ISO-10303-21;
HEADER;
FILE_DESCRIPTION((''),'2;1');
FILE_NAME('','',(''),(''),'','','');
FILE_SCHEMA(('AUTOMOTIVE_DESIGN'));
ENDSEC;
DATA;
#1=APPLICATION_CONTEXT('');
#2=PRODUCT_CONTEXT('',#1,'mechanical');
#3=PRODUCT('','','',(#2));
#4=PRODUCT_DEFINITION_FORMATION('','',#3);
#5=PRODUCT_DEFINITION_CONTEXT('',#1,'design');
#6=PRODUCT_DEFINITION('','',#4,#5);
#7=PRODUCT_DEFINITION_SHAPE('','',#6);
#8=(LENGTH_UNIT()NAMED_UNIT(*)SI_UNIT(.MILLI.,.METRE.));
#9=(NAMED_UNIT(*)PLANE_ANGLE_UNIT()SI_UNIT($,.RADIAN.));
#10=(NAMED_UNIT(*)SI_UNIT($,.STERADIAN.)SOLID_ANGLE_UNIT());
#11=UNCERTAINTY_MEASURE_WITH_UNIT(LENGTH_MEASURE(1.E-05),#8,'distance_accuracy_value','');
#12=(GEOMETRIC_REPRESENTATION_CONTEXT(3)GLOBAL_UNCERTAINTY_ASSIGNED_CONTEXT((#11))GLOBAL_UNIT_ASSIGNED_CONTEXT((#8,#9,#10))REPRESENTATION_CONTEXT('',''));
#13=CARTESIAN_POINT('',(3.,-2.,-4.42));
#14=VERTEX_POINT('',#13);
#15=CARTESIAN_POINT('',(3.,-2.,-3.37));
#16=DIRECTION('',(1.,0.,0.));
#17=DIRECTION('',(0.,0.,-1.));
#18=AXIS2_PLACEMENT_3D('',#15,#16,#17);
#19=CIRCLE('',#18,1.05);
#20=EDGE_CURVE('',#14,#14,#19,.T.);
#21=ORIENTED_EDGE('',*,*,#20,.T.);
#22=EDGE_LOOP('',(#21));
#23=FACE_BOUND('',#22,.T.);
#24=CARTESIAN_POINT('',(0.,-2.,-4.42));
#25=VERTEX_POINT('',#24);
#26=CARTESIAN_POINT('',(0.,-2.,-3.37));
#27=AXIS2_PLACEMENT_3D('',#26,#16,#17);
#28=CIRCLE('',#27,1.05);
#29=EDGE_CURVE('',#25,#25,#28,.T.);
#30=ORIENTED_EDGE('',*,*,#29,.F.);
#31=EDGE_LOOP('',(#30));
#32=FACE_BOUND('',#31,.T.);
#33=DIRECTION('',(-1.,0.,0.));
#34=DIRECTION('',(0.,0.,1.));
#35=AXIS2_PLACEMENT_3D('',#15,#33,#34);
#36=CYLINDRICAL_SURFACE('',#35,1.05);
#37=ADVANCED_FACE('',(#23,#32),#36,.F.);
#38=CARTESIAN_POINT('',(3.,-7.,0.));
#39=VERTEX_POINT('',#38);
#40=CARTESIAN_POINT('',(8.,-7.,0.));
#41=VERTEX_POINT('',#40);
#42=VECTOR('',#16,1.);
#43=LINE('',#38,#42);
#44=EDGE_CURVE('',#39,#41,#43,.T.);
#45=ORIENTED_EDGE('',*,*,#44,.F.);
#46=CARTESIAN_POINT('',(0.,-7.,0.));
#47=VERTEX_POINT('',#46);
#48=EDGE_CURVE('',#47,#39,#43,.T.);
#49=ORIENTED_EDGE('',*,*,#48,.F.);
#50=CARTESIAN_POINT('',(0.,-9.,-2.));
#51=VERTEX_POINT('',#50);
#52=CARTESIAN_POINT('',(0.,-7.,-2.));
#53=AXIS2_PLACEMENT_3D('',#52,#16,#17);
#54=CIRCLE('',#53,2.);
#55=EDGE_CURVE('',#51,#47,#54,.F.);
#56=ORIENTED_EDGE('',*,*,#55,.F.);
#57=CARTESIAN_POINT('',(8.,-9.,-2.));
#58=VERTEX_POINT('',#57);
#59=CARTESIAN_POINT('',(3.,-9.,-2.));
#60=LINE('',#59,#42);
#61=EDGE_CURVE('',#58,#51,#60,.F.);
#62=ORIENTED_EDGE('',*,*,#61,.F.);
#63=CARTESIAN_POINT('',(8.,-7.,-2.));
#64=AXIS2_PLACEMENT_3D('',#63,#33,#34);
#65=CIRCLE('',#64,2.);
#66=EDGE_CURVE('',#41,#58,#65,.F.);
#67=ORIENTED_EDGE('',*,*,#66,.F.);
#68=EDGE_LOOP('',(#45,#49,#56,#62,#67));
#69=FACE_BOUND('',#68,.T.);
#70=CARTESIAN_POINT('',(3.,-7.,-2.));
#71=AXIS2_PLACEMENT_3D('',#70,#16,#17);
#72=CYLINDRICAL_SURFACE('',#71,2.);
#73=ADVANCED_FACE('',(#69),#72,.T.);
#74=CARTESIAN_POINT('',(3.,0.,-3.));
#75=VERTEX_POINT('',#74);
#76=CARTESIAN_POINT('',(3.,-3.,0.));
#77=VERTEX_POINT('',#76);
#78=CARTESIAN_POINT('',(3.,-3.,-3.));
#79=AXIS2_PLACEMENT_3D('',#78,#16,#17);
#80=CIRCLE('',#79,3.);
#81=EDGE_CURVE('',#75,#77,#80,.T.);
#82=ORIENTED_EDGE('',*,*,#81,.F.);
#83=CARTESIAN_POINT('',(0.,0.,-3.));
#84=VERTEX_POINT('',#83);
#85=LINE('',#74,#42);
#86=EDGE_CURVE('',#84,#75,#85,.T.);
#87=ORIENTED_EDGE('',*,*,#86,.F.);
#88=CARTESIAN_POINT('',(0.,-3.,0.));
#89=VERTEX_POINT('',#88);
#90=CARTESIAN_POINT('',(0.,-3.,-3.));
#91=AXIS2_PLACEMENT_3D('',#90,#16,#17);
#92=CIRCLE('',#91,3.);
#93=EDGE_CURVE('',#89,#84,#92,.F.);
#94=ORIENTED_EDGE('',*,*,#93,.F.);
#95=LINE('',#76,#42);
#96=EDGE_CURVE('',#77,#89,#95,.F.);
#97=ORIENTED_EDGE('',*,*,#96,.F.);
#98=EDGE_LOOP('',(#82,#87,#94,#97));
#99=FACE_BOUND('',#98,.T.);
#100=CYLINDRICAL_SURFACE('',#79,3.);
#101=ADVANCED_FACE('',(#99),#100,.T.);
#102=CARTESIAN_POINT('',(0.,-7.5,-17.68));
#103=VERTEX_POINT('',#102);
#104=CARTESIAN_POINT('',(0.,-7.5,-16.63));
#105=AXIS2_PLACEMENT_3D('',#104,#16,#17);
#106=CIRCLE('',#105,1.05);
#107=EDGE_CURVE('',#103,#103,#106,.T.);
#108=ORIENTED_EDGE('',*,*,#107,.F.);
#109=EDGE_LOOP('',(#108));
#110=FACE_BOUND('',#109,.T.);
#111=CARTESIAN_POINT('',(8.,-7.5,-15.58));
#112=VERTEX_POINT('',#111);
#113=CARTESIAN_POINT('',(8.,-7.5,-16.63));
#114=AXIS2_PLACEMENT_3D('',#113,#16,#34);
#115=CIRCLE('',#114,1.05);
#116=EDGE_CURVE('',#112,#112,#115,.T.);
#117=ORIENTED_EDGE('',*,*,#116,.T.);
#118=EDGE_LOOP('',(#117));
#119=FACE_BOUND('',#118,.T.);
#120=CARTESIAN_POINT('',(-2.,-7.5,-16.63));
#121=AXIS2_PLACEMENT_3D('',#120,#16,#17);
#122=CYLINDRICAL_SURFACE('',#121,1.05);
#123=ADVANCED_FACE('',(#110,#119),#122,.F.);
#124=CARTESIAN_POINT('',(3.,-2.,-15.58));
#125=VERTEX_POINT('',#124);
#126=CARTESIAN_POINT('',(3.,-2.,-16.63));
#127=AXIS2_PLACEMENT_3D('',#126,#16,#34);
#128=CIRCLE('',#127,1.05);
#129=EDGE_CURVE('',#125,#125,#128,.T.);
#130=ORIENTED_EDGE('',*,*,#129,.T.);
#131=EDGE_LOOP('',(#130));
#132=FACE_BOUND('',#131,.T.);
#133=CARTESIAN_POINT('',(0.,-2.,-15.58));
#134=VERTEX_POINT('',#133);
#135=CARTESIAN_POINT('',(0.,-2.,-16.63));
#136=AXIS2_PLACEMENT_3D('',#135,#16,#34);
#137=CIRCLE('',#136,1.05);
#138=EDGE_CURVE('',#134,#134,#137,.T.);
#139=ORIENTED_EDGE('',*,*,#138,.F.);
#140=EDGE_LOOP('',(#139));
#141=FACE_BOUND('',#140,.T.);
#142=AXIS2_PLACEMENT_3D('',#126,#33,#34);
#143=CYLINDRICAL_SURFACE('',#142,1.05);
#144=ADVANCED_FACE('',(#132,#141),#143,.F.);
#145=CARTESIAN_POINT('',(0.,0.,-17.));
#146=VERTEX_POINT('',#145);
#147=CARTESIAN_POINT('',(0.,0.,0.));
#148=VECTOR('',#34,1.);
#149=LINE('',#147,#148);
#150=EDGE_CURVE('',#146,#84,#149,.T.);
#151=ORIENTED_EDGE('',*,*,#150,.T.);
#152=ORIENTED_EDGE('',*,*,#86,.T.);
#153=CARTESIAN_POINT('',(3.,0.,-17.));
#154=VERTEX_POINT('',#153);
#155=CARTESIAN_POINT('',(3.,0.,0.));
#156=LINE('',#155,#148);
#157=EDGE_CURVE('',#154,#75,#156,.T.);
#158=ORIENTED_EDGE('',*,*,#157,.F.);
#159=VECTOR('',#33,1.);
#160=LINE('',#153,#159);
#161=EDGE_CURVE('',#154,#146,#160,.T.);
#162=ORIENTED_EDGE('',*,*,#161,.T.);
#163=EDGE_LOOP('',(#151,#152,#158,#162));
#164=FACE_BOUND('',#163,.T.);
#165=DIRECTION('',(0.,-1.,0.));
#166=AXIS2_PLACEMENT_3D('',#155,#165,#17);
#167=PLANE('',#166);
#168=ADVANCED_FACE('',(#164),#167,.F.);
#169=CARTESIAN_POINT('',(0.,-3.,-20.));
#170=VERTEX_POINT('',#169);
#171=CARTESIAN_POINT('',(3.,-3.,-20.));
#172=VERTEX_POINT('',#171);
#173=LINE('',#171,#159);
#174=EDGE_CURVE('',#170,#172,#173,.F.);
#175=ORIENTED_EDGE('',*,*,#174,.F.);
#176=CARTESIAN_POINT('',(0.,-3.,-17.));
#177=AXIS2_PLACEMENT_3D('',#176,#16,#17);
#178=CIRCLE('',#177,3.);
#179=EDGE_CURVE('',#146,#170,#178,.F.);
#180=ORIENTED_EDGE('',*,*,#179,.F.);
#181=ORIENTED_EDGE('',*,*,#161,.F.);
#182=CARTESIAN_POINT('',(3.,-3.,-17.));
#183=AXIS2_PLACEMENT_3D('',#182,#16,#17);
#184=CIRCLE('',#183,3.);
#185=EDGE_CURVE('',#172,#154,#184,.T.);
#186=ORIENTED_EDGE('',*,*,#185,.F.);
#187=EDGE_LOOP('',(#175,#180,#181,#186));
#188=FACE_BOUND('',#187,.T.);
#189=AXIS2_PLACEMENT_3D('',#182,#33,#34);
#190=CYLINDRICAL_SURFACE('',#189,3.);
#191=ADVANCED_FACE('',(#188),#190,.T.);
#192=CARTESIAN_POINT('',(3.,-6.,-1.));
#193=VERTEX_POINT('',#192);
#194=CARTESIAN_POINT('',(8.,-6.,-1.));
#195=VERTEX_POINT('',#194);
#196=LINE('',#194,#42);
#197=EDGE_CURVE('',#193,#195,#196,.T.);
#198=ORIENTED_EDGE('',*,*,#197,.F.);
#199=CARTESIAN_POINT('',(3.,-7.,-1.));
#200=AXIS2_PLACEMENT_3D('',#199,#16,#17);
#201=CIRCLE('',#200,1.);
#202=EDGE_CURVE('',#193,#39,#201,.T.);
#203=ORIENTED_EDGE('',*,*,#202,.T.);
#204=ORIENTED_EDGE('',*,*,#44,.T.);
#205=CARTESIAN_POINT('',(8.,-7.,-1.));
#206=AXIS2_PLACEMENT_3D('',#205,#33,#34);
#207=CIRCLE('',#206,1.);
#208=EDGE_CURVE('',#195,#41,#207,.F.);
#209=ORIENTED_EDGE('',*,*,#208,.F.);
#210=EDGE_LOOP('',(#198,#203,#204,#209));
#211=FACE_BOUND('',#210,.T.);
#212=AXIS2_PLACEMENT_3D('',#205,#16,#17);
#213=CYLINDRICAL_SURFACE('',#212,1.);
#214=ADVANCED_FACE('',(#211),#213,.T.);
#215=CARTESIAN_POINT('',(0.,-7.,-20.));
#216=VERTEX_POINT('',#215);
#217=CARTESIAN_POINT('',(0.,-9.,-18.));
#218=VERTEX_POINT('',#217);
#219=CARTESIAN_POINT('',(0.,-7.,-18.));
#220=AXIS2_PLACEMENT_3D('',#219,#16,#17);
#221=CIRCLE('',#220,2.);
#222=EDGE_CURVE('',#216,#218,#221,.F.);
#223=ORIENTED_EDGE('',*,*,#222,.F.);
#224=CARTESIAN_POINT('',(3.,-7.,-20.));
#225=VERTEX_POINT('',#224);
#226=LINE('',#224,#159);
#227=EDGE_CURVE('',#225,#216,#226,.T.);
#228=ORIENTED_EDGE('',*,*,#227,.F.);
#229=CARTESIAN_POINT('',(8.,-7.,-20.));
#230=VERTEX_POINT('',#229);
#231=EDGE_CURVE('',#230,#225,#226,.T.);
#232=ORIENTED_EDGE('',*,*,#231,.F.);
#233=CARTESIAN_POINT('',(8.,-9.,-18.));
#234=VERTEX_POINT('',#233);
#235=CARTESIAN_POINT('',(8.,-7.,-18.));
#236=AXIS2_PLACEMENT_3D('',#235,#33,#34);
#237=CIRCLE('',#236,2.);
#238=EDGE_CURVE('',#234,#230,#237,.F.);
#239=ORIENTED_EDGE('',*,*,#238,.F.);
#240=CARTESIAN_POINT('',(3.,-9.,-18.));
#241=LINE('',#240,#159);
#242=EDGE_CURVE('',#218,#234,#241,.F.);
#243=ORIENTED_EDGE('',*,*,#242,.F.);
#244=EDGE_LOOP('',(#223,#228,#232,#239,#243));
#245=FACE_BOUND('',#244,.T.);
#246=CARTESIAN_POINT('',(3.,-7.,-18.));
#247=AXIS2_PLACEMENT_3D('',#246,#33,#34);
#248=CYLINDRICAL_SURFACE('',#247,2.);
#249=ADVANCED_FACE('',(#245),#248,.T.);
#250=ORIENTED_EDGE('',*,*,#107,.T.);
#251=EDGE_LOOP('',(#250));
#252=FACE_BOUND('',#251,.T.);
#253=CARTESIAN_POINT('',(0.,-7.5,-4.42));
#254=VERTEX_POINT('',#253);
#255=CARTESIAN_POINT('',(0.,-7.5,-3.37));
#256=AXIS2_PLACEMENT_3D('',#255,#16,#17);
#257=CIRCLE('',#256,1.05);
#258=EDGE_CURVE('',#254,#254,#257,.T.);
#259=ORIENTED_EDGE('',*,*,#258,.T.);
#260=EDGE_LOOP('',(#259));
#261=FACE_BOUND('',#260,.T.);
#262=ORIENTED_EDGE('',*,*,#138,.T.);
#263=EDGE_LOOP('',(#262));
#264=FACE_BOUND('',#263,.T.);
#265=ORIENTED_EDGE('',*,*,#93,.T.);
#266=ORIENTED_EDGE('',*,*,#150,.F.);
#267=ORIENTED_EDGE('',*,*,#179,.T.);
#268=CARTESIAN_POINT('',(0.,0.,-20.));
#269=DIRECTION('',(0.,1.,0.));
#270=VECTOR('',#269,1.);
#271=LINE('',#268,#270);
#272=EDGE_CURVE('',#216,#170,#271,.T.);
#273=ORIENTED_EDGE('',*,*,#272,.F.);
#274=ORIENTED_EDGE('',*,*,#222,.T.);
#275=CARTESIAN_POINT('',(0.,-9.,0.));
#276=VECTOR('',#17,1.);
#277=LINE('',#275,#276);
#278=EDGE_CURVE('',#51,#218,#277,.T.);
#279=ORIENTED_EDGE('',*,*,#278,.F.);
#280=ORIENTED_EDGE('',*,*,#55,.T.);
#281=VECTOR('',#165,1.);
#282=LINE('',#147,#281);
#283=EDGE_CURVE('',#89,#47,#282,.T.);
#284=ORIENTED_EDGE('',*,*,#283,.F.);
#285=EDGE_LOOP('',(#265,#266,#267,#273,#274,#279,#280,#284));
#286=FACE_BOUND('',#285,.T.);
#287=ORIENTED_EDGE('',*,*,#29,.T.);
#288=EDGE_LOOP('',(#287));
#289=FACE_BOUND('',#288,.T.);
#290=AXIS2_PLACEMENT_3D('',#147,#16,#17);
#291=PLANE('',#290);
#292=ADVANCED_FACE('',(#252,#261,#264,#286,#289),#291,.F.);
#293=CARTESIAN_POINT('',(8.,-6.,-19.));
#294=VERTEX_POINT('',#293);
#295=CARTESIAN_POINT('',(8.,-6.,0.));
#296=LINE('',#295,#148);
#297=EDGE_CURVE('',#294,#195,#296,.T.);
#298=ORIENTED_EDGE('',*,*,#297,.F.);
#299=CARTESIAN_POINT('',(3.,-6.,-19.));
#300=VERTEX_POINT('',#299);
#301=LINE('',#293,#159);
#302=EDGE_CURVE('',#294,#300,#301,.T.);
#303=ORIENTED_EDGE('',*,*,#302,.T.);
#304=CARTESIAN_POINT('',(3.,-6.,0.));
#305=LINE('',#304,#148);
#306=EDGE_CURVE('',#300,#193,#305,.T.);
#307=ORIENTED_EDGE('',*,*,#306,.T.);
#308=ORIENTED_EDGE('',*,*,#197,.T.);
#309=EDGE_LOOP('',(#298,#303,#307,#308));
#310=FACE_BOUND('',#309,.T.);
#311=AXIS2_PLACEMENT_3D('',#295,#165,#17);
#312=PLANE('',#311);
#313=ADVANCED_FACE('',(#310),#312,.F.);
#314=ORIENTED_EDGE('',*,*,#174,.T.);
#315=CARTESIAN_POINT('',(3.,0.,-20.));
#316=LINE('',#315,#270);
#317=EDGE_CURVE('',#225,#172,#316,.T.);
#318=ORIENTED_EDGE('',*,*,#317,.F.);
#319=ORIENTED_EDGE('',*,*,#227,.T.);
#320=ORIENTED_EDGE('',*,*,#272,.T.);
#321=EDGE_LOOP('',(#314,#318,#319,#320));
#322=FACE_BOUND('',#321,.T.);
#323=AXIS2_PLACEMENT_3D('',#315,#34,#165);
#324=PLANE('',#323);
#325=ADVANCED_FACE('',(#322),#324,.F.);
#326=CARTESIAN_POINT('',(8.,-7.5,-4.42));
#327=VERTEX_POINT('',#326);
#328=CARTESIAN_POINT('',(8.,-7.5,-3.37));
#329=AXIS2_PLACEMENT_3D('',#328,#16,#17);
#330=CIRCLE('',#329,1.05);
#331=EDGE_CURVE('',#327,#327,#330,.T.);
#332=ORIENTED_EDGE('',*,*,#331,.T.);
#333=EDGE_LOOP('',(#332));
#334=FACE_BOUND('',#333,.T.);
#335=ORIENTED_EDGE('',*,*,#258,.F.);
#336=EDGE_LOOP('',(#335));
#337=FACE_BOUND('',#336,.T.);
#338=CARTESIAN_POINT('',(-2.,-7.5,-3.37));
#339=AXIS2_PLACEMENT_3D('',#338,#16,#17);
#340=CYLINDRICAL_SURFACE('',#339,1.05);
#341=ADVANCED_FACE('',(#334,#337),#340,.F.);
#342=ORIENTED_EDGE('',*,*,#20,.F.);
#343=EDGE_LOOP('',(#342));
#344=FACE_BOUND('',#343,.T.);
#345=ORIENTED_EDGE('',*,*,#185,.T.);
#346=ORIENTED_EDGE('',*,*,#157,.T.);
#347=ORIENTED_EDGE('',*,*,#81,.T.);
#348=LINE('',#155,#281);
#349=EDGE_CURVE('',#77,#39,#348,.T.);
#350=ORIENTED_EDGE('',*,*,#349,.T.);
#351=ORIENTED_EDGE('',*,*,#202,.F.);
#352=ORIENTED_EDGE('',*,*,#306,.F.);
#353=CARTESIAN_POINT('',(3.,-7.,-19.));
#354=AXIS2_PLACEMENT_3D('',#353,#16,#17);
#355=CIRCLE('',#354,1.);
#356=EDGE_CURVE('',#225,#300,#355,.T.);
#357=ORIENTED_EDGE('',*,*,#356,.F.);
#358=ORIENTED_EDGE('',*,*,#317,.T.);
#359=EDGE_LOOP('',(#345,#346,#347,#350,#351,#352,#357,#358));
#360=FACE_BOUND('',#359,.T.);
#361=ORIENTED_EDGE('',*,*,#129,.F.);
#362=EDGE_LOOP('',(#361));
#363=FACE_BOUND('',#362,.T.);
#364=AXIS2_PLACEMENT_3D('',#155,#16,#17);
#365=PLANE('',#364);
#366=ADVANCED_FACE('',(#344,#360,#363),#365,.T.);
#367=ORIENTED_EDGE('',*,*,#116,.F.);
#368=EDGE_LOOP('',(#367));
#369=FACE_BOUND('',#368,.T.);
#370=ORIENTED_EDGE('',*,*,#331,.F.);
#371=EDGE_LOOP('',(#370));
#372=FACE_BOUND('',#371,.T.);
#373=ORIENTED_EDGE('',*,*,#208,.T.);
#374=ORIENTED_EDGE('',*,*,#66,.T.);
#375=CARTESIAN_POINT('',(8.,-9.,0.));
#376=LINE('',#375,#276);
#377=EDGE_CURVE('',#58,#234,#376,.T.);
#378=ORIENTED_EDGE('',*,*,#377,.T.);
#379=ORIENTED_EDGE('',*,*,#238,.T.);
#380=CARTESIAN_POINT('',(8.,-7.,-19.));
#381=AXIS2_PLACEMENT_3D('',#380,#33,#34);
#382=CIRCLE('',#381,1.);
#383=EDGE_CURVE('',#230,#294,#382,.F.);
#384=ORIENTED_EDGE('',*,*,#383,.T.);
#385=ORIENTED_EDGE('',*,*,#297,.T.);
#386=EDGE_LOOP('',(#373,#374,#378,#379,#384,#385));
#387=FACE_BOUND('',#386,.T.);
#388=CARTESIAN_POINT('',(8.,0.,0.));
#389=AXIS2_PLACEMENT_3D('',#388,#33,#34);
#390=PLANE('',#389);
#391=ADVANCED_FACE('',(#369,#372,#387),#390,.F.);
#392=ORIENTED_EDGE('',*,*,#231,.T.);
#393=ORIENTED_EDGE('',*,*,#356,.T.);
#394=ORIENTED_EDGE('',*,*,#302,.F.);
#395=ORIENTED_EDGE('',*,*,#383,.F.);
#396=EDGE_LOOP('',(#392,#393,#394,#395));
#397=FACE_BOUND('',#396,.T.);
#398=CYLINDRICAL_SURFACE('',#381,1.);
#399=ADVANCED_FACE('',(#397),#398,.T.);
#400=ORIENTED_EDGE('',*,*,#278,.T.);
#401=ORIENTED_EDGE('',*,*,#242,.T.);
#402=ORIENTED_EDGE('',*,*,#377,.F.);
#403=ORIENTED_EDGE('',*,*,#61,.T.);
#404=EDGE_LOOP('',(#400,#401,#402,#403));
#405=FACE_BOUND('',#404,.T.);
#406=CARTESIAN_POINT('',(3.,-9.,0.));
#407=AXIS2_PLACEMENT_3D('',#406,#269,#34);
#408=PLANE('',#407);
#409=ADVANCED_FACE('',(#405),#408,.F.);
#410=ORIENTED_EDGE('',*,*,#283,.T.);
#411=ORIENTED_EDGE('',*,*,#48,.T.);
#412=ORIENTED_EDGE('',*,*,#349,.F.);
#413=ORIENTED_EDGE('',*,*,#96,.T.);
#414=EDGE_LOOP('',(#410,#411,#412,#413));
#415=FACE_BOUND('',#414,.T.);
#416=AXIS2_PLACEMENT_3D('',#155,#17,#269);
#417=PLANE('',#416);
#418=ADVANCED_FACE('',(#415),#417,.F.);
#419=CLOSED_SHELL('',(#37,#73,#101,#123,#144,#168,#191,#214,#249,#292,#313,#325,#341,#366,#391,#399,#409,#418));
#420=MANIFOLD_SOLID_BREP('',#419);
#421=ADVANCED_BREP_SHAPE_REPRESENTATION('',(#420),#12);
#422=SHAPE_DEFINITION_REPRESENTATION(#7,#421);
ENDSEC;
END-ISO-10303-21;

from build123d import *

# Parameters (mm, degrees)
SKETCH_1_W          = 20
SKETCH_1_H          = 9
SKETCH_1_R          = 1.05
EXTRUDE_1_DEPTH     = 3
SKETCH_2_W          = 20
SKETCH_2_H          = 3
EXTRUDE_2_DEPTH     = 5
SKETCH_3_R          = 1.05
CUT_EXTRUDE_1_DEPTH = 10
FILLET_1_R          = 3
FILLET_2_R          = 3
FILLET_3_R          = 2
FILLET_4_R          = 2
FILLET_7_R          = 1
FILLET_8_R          = 1


with BuildPart() as part:
    # 草图1 → 凸台-拉伸1 (new body)
    with BuildSketch(Plane(origin=(0, 0, 0), x_dir=(0, 0, -1), z_dir=(1, 0, 0))):
        with Locations((10, -4.5)):
            Rectangle(SKETCH_1_W, SKETCH_1_H)
        with Locations((3.37, -2)):
            Circle(SKETCH_1_R, mode=Mode.SUBTRACT)
        with Locations(Location((16.63, -2, 0), (0, 0, 180))):
            Circle(SKETCH_1_R, mode=Mode.SUBTRACT)
    extrude(amount=EXTRUDE_1_DEPTH)

    # 草图2 → 凸台-拉伸2 (add)
    with BuildSketch(Plane(origin=(3, 0, 0), x_dir=(0, 0, -1), z_dir=(1, 0, 0))):
        with Locations((10, -7.5)):
            Rectangle(SKETCH_2_W, SKETCH_2_H)
    extrude(amount=EXTRUDE_2_DEPTH)

    # 草图3 → 切除-拉伸1 (cut)
    with BuildSketch(Plane(origin=(8, 0, 0), x_dir=(0, 0, -1), z_dir=(1, 0, 0))):
        with Locations((3.37, -7.5)):
            Circle(SKETCH_3_R)
        with Locations((16.63, -7.5)):
            Circle(SKETCH_3_R)
    extrude(amount=-CUT_EXTRUDE_1_DEPTH, mode=Mode.SUBTRACT)

    # 圆角1
    fillet_1_edges = [part.edges().sort_by_distance(p)[0] for p in [
        (1.5, 0, 0),
    ]]
    fillet(fillet_1_edges, radius=FILLET_1_R)

    # 圆角2
    fillet_2_edges = [part.edges().sort_by_distance(p)[0] for p in [
        (1.5, 0, -20),
    ]]
    fillet(fillet_2_edges, radius=FILLET_2_R)

    # 圆角3
    fillet_3_edges = [part.edges().sort_by_distance(p)[0] for p in [
        (4, -9, -20),
    ]]
    fillet(fillet_3_edges, radius=FILLET_3_R)

    # 圆角4
    fillet_4_edges = [part.edges().sort_by_distance(p)[0] for p in [
        (4, -9, 0),
    ]]
    fillet(fillet_4_edges, radius=FILLET_4_R)

    # 圆角7
    fillet_7_edges = [part.edges().sort_by_distance(p)[0] for p in [
        (5.5, -6, 0),
    ]]
    fillet(fillet_7_edges, radius=FILLET_7_R - 0.0001)  # a hair under: the kernel refuses the full size

    # 圆角8
    fillet_8_edges = [part.edges().sort_by_distance(p)[0] for p in [
        (5.5, -6, -20),
    ]]
    fillet(fillet_8_edges, radius=FILLET_8_R - 0.0001)  # a hair under: the kernel refuses the full size


solid = part.part
